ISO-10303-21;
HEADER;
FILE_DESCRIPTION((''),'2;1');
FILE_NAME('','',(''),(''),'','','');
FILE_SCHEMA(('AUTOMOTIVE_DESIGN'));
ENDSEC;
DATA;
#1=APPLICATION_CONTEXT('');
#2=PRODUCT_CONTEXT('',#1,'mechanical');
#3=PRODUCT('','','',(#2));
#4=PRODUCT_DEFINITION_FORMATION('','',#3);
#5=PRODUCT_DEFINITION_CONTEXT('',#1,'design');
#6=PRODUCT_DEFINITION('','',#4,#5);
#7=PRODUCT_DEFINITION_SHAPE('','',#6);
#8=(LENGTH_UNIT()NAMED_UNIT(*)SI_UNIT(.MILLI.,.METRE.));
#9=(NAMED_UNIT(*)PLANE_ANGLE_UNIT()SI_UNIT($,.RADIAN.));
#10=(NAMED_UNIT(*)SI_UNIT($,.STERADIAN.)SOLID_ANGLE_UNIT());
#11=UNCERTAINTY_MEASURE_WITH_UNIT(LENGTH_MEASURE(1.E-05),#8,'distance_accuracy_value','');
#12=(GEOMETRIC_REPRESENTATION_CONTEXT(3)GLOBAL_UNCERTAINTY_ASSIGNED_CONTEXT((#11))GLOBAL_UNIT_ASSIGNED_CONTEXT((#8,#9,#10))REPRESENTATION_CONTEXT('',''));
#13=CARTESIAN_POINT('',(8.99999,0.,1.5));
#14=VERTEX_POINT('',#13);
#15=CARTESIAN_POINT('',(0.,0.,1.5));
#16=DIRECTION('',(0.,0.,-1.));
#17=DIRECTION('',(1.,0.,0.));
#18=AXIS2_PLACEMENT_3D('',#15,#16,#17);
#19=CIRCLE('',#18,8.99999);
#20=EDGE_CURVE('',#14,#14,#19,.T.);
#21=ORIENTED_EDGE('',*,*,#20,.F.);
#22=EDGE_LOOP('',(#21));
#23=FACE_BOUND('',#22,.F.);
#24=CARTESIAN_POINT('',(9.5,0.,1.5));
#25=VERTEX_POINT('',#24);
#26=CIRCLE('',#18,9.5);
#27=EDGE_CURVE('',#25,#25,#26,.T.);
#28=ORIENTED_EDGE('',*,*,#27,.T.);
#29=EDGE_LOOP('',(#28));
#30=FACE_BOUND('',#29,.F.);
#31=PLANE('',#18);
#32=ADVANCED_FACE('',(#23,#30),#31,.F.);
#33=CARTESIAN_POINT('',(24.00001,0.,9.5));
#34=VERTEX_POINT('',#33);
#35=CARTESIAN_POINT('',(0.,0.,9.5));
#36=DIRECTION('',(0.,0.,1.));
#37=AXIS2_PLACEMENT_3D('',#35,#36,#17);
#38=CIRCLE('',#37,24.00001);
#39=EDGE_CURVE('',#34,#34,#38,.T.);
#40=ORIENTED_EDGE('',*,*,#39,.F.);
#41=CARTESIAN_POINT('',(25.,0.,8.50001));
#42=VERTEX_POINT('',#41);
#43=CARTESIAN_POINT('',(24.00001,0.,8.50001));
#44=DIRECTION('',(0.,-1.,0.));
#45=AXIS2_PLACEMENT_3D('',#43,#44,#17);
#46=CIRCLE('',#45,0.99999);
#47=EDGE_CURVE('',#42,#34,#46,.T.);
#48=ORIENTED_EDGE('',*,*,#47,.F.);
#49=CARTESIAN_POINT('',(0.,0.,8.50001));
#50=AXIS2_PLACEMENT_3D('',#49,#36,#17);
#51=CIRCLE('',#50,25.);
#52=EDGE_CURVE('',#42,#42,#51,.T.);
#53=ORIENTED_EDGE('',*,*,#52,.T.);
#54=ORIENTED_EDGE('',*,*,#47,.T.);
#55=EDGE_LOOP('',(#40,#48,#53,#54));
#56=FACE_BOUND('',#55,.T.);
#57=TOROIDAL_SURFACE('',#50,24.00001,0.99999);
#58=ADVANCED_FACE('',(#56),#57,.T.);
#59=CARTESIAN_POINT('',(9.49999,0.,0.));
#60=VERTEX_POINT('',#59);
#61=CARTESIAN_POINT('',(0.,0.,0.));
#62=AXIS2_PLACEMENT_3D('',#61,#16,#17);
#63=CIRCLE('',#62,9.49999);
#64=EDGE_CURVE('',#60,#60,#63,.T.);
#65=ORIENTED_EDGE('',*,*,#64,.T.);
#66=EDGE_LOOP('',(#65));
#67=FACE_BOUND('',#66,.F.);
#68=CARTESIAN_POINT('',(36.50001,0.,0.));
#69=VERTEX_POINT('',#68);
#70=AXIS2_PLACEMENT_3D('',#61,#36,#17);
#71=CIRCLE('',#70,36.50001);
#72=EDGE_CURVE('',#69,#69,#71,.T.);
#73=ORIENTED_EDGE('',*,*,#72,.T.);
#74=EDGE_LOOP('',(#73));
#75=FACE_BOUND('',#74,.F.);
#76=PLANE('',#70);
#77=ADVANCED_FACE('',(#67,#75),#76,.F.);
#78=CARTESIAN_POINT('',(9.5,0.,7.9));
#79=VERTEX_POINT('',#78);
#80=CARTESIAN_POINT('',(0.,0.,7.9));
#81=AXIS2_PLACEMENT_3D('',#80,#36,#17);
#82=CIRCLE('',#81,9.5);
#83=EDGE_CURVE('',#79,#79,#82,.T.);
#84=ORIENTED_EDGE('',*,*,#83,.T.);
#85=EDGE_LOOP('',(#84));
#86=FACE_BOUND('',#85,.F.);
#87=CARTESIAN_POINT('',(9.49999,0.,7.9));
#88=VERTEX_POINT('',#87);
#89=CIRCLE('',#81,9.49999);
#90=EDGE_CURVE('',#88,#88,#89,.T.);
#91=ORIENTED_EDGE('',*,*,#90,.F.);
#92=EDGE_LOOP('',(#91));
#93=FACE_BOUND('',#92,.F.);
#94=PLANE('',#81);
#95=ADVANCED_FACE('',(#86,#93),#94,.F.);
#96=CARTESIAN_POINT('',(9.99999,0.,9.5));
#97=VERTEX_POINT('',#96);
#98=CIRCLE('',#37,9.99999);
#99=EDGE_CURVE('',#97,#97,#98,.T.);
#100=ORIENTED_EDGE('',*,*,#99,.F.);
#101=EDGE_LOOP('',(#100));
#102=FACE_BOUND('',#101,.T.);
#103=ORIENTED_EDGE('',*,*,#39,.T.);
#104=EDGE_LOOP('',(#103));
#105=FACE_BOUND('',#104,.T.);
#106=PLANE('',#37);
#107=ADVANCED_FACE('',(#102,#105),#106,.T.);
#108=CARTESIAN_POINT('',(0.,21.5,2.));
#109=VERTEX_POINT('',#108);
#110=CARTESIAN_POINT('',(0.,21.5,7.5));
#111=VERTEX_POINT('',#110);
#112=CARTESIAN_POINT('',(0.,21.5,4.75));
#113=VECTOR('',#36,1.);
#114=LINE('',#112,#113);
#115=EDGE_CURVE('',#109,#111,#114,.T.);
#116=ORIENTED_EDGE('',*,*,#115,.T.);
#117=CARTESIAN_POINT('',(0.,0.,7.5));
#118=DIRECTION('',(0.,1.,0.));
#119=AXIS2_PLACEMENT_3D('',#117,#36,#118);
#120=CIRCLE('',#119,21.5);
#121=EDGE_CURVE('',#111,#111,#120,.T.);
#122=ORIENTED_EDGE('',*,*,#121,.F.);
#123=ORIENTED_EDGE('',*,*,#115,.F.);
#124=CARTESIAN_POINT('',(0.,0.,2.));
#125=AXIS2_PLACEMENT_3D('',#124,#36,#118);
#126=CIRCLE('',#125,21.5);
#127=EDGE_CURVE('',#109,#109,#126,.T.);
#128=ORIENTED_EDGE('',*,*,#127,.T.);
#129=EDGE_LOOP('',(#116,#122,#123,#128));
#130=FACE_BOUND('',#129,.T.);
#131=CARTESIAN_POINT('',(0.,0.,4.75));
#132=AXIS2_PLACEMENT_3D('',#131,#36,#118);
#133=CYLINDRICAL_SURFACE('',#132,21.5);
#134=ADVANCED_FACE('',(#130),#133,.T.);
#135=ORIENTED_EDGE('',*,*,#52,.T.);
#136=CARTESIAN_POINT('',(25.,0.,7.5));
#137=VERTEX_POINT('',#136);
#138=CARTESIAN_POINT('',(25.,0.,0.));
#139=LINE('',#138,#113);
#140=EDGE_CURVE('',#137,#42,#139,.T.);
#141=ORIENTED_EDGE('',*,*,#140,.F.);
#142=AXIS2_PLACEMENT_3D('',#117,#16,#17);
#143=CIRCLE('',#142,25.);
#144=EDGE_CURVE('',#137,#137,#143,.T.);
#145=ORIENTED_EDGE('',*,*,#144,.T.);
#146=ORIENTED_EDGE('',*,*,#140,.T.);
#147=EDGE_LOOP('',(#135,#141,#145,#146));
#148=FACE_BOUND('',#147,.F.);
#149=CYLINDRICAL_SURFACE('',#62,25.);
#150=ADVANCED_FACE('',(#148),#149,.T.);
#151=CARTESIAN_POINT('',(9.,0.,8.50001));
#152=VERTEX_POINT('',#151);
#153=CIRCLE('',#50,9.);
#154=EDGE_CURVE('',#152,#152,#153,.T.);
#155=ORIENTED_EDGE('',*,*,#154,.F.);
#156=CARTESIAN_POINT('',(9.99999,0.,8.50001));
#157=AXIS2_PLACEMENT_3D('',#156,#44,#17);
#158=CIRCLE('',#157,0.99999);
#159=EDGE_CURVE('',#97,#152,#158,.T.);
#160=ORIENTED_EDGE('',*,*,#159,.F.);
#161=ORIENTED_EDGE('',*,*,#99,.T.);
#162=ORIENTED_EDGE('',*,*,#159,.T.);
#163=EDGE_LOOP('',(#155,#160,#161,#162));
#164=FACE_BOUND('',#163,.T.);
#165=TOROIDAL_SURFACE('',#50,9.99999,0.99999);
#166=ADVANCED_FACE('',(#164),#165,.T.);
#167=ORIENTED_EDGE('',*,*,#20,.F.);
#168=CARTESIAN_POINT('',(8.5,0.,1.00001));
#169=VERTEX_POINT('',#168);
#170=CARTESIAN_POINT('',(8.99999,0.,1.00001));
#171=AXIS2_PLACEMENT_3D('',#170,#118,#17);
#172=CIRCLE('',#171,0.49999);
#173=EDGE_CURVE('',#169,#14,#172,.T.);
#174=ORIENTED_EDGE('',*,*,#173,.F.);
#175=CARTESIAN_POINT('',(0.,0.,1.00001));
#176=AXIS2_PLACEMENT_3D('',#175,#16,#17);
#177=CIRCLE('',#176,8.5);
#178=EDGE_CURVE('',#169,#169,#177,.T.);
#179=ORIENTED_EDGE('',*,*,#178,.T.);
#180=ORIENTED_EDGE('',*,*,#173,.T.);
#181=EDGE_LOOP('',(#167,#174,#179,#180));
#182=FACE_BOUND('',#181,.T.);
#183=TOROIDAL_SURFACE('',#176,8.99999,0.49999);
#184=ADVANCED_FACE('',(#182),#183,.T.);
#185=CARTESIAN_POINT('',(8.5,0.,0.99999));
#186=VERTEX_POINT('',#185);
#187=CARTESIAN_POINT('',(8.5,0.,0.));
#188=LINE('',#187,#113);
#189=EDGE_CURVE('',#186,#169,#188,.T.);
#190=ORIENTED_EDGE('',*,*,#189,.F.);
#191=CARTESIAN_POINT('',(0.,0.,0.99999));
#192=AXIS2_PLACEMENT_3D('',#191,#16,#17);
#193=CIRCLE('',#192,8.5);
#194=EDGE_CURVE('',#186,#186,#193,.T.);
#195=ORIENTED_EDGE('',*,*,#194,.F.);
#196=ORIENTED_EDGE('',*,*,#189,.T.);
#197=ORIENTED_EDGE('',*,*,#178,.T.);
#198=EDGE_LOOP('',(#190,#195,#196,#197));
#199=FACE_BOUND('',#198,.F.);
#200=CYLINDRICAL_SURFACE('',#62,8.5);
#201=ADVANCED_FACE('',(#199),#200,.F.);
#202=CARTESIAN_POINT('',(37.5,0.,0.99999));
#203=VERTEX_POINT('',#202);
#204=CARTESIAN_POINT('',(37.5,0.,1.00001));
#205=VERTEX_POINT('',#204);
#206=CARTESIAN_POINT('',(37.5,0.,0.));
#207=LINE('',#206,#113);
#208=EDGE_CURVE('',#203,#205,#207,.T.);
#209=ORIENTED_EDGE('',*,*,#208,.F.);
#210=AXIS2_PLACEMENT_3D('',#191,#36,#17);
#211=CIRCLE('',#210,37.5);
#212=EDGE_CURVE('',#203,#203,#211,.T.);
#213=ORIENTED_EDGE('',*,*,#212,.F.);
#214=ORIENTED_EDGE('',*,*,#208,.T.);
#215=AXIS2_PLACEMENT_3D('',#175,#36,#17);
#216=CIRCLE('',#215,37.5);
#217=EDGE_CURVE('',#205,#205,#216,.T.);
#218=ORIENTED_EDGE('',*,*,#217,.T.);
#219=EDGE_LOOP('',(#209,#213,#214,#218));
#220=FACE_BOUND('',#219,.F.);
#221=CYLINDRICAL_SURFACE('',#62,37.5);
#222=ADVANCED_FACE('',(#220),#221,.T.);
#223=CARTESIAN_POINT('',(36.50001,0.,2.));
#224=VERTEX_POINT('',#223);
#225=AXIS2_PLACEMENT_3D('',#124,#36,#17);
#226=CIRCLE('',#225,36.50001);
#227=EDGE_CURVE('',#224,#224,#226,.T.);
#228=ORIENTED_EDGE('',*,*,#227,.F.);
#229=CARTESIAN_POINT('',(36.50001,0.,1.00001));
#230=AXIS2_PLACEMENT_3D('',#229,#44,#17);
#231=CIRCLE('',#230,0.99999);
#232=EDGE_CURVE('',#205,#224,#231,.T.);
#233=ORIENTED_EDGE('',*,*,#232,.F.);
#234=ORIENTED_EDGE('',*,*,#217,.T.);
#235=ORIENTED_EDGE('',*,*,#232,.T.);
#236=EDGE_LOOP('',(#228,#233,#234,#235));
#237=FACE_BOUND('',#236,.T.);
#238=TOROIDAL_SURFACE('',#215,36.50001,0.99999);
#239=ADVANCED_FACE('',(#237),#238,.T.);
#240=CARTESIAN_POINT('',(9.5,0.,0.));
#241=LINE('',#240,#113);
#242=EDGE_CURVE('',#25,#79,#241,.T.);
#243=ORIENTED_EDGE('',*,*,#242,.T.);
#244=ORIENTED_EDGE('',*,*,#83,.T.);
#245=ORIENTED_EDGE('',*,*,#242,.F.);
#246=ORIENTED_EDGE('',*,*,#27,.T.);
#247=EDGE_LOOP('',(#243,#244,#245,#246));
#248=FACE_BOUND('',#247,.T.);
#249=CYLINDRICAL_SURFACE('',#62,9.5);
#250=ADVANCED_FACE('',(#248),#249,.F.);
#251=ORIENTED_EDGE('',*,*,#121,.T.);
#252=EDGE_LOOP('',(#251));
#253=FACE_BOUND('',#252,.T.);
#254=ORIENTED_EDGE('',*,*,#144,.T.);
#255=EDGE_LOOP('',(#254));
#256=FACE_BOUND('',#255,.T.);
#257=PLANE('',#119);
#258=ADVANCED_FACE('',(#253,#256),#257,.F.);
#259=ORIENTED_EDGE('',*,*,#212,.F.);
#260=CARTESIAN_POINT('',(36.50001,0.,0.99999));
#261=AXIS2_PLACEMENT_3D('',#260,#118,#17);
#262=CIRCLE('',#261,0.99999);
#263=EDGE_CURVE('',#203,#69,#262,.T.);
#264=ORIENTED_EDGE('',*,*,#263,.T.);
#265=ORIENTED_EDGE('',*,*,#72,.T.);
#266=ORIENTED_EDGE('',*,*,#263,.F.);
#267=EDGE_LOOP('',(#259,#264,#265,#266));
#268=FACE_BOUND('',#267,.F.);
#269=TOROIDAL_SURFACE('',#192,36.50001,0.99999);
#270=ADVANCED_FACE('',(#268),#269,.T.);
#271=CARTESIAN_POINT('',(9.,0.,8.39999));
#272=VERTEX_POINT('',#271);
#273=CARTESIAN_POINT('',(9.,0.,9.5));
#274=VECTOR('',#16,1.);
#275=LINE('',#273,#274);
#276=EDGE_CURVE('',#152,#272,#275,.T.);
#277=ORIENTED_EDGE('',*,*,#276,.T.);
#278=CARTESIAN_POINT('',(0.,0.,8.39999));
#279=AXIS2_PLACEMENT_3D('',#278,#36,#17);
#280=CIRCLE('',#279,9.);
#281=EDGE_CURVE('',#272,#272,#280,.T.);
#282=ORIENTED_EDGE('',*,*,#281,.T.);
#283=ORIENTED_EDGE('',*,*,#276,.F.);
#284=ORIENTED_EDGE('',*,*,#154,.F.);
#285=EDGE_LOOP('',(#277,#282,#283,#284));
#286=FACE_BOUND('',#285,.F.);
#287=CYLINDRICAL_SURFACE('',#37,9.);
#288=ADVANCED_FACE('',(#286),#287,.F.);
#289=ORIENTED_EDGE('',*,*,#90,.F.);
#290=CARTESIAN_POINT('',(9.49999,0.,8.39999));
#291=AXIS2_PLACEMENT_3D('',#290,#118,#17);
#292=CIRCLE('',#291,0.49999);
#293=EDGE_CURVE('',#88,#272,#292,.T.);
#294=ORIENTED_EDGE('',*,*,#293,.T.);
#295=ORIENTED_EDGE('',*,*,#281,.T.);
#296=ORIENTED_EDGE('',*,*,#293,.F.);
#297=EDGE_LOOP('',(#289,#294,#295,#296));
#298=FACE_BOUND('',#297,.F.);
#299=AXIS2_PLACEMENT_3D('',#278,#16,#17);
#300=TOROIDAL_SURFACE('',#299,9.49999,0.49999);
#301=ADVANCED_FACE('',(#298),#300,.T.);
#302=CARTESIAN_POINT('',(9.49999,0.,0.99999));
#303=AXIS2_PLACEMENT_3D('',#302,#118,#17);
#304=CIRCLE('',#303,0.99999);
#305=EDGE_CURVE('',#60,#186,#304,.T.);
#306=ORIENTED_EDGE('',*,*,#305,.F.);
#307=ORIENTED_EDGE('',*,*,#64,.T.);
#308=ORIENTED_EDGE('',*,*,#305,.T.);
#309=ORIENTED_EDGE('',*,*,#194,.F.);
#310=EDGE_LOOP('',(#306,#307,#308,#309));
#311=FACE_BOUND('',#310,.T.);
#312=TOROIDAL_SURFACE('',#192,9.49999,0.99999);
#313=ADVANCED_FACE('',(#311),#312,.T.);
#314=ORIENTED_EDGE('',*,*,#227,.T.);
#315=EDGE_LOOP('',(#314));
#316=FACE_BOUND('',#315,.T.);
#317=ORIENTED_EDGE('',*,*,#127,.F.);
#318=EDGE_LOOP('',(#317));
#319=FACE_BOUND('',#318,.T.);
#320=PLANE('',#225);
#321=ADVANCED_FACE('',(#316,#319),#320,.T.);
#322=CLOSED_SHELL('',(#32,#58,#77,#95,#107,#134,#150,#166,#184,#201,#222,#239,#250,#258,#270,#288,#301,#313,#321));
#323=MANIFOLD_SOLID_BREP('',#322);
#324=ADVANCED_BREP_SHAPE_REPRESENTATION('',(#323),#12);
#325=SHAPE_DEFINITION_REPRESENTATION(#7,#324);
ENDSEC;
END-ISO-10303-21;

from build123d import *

# Parameters (mm, degrees)
F0_R     = 25
F0_R_2   = 9.5
F1_DEPTH = 9.5
F2_W     = 3.5
F2_H     = 5.5
F4_R     = 9.5
F4_R_2   = 8.5
F5_DEPTH = 1.5
F6_R     = 9.5
F6_R_2   = 9
F7_DEPTH = 1.6
F0_R_3   = 37.5
F8_DEPTH = 2
F9_R     = 0.99999
F10_R    = 0.49999


# Not quite as in the source:
# - a fillet or chamfer is up to 0.001 mm smaller than in the source, because OpenCascade refuses the exact size


with BuildPart() as f1:
    # F0 (on Top) → F1 (new body)
    with BuildSketch(Plane.XY):
        Circle(F0_R)
        Circle(F0_R_2, mode=Mode.SUBTRACT)
    extrude(amount=F1_DEPTH)

    # F2 (on Right) → F3 (revolve, cut)
    with BuildSketch(Plane.YZ):
        with Locations((23.25, 4.75)):
            Rectangle(F2_W, F2_H)
    revolve(axis=Axis((0, 0, 13.2580241188), (0, 0, 1)), mode=Mode.SUBTRACT)

    # F4 (on face) → F5 (join)
    with BuildSketch(Plane(origin=(0, 0, 0), x_dir=(1, 0, 0), z_dir=(0, 0, -1))):
        Circle(F4_R)
        Circle(F4_R_2, mode=Mode.SUBTRACT)
    extrude(amount=-F5_DEPTH)

    # F6 (on face) → F7 (join)
    with BuildSketch(Plane.XY.offset(9.5)):
        Circle(F6_R)
        Circle(F6_R_2, mode=Mode.SUBTRACT)
    extrude(amount=-F7_DEPTH)

    # F0 (on Top) → F8 (join)
    with BuildSketch(Plane.XY):
        Circle(F0_R_3)
        Circle(F0_R, mode=Mode.SUBTRACT)
    extrude(amount=F8_DEPTH)

    # F9 (radius 1 in the source; OpenCascade refuses exactly that, so slightly less here)
    f9_edges = [f1.edges().sort_by_distance(p)[0] for p in [
        (37.5, 0, 1),
        (-37.5, 0, 0),
        (-37.5, 0, 2),
        (-25, 0, 9.5),
        (-9, 0, 9.5),
        (-8.5, 0, 0),
    ]]
    fillet(f9_edges, radius=F9_R)

    # F10 (radius 0.5 in the source; OpenCascade refuses exactly that, so slightly less here)
    f10_edges = [f1.edges().sort_by_distance(p)[0] for p in [
        (-8.5, 0, 1.5),
        (-9, 0, 7.9),
    ]]
    fillet(f10_edges, radius=F10_R)


solid = f1.part
